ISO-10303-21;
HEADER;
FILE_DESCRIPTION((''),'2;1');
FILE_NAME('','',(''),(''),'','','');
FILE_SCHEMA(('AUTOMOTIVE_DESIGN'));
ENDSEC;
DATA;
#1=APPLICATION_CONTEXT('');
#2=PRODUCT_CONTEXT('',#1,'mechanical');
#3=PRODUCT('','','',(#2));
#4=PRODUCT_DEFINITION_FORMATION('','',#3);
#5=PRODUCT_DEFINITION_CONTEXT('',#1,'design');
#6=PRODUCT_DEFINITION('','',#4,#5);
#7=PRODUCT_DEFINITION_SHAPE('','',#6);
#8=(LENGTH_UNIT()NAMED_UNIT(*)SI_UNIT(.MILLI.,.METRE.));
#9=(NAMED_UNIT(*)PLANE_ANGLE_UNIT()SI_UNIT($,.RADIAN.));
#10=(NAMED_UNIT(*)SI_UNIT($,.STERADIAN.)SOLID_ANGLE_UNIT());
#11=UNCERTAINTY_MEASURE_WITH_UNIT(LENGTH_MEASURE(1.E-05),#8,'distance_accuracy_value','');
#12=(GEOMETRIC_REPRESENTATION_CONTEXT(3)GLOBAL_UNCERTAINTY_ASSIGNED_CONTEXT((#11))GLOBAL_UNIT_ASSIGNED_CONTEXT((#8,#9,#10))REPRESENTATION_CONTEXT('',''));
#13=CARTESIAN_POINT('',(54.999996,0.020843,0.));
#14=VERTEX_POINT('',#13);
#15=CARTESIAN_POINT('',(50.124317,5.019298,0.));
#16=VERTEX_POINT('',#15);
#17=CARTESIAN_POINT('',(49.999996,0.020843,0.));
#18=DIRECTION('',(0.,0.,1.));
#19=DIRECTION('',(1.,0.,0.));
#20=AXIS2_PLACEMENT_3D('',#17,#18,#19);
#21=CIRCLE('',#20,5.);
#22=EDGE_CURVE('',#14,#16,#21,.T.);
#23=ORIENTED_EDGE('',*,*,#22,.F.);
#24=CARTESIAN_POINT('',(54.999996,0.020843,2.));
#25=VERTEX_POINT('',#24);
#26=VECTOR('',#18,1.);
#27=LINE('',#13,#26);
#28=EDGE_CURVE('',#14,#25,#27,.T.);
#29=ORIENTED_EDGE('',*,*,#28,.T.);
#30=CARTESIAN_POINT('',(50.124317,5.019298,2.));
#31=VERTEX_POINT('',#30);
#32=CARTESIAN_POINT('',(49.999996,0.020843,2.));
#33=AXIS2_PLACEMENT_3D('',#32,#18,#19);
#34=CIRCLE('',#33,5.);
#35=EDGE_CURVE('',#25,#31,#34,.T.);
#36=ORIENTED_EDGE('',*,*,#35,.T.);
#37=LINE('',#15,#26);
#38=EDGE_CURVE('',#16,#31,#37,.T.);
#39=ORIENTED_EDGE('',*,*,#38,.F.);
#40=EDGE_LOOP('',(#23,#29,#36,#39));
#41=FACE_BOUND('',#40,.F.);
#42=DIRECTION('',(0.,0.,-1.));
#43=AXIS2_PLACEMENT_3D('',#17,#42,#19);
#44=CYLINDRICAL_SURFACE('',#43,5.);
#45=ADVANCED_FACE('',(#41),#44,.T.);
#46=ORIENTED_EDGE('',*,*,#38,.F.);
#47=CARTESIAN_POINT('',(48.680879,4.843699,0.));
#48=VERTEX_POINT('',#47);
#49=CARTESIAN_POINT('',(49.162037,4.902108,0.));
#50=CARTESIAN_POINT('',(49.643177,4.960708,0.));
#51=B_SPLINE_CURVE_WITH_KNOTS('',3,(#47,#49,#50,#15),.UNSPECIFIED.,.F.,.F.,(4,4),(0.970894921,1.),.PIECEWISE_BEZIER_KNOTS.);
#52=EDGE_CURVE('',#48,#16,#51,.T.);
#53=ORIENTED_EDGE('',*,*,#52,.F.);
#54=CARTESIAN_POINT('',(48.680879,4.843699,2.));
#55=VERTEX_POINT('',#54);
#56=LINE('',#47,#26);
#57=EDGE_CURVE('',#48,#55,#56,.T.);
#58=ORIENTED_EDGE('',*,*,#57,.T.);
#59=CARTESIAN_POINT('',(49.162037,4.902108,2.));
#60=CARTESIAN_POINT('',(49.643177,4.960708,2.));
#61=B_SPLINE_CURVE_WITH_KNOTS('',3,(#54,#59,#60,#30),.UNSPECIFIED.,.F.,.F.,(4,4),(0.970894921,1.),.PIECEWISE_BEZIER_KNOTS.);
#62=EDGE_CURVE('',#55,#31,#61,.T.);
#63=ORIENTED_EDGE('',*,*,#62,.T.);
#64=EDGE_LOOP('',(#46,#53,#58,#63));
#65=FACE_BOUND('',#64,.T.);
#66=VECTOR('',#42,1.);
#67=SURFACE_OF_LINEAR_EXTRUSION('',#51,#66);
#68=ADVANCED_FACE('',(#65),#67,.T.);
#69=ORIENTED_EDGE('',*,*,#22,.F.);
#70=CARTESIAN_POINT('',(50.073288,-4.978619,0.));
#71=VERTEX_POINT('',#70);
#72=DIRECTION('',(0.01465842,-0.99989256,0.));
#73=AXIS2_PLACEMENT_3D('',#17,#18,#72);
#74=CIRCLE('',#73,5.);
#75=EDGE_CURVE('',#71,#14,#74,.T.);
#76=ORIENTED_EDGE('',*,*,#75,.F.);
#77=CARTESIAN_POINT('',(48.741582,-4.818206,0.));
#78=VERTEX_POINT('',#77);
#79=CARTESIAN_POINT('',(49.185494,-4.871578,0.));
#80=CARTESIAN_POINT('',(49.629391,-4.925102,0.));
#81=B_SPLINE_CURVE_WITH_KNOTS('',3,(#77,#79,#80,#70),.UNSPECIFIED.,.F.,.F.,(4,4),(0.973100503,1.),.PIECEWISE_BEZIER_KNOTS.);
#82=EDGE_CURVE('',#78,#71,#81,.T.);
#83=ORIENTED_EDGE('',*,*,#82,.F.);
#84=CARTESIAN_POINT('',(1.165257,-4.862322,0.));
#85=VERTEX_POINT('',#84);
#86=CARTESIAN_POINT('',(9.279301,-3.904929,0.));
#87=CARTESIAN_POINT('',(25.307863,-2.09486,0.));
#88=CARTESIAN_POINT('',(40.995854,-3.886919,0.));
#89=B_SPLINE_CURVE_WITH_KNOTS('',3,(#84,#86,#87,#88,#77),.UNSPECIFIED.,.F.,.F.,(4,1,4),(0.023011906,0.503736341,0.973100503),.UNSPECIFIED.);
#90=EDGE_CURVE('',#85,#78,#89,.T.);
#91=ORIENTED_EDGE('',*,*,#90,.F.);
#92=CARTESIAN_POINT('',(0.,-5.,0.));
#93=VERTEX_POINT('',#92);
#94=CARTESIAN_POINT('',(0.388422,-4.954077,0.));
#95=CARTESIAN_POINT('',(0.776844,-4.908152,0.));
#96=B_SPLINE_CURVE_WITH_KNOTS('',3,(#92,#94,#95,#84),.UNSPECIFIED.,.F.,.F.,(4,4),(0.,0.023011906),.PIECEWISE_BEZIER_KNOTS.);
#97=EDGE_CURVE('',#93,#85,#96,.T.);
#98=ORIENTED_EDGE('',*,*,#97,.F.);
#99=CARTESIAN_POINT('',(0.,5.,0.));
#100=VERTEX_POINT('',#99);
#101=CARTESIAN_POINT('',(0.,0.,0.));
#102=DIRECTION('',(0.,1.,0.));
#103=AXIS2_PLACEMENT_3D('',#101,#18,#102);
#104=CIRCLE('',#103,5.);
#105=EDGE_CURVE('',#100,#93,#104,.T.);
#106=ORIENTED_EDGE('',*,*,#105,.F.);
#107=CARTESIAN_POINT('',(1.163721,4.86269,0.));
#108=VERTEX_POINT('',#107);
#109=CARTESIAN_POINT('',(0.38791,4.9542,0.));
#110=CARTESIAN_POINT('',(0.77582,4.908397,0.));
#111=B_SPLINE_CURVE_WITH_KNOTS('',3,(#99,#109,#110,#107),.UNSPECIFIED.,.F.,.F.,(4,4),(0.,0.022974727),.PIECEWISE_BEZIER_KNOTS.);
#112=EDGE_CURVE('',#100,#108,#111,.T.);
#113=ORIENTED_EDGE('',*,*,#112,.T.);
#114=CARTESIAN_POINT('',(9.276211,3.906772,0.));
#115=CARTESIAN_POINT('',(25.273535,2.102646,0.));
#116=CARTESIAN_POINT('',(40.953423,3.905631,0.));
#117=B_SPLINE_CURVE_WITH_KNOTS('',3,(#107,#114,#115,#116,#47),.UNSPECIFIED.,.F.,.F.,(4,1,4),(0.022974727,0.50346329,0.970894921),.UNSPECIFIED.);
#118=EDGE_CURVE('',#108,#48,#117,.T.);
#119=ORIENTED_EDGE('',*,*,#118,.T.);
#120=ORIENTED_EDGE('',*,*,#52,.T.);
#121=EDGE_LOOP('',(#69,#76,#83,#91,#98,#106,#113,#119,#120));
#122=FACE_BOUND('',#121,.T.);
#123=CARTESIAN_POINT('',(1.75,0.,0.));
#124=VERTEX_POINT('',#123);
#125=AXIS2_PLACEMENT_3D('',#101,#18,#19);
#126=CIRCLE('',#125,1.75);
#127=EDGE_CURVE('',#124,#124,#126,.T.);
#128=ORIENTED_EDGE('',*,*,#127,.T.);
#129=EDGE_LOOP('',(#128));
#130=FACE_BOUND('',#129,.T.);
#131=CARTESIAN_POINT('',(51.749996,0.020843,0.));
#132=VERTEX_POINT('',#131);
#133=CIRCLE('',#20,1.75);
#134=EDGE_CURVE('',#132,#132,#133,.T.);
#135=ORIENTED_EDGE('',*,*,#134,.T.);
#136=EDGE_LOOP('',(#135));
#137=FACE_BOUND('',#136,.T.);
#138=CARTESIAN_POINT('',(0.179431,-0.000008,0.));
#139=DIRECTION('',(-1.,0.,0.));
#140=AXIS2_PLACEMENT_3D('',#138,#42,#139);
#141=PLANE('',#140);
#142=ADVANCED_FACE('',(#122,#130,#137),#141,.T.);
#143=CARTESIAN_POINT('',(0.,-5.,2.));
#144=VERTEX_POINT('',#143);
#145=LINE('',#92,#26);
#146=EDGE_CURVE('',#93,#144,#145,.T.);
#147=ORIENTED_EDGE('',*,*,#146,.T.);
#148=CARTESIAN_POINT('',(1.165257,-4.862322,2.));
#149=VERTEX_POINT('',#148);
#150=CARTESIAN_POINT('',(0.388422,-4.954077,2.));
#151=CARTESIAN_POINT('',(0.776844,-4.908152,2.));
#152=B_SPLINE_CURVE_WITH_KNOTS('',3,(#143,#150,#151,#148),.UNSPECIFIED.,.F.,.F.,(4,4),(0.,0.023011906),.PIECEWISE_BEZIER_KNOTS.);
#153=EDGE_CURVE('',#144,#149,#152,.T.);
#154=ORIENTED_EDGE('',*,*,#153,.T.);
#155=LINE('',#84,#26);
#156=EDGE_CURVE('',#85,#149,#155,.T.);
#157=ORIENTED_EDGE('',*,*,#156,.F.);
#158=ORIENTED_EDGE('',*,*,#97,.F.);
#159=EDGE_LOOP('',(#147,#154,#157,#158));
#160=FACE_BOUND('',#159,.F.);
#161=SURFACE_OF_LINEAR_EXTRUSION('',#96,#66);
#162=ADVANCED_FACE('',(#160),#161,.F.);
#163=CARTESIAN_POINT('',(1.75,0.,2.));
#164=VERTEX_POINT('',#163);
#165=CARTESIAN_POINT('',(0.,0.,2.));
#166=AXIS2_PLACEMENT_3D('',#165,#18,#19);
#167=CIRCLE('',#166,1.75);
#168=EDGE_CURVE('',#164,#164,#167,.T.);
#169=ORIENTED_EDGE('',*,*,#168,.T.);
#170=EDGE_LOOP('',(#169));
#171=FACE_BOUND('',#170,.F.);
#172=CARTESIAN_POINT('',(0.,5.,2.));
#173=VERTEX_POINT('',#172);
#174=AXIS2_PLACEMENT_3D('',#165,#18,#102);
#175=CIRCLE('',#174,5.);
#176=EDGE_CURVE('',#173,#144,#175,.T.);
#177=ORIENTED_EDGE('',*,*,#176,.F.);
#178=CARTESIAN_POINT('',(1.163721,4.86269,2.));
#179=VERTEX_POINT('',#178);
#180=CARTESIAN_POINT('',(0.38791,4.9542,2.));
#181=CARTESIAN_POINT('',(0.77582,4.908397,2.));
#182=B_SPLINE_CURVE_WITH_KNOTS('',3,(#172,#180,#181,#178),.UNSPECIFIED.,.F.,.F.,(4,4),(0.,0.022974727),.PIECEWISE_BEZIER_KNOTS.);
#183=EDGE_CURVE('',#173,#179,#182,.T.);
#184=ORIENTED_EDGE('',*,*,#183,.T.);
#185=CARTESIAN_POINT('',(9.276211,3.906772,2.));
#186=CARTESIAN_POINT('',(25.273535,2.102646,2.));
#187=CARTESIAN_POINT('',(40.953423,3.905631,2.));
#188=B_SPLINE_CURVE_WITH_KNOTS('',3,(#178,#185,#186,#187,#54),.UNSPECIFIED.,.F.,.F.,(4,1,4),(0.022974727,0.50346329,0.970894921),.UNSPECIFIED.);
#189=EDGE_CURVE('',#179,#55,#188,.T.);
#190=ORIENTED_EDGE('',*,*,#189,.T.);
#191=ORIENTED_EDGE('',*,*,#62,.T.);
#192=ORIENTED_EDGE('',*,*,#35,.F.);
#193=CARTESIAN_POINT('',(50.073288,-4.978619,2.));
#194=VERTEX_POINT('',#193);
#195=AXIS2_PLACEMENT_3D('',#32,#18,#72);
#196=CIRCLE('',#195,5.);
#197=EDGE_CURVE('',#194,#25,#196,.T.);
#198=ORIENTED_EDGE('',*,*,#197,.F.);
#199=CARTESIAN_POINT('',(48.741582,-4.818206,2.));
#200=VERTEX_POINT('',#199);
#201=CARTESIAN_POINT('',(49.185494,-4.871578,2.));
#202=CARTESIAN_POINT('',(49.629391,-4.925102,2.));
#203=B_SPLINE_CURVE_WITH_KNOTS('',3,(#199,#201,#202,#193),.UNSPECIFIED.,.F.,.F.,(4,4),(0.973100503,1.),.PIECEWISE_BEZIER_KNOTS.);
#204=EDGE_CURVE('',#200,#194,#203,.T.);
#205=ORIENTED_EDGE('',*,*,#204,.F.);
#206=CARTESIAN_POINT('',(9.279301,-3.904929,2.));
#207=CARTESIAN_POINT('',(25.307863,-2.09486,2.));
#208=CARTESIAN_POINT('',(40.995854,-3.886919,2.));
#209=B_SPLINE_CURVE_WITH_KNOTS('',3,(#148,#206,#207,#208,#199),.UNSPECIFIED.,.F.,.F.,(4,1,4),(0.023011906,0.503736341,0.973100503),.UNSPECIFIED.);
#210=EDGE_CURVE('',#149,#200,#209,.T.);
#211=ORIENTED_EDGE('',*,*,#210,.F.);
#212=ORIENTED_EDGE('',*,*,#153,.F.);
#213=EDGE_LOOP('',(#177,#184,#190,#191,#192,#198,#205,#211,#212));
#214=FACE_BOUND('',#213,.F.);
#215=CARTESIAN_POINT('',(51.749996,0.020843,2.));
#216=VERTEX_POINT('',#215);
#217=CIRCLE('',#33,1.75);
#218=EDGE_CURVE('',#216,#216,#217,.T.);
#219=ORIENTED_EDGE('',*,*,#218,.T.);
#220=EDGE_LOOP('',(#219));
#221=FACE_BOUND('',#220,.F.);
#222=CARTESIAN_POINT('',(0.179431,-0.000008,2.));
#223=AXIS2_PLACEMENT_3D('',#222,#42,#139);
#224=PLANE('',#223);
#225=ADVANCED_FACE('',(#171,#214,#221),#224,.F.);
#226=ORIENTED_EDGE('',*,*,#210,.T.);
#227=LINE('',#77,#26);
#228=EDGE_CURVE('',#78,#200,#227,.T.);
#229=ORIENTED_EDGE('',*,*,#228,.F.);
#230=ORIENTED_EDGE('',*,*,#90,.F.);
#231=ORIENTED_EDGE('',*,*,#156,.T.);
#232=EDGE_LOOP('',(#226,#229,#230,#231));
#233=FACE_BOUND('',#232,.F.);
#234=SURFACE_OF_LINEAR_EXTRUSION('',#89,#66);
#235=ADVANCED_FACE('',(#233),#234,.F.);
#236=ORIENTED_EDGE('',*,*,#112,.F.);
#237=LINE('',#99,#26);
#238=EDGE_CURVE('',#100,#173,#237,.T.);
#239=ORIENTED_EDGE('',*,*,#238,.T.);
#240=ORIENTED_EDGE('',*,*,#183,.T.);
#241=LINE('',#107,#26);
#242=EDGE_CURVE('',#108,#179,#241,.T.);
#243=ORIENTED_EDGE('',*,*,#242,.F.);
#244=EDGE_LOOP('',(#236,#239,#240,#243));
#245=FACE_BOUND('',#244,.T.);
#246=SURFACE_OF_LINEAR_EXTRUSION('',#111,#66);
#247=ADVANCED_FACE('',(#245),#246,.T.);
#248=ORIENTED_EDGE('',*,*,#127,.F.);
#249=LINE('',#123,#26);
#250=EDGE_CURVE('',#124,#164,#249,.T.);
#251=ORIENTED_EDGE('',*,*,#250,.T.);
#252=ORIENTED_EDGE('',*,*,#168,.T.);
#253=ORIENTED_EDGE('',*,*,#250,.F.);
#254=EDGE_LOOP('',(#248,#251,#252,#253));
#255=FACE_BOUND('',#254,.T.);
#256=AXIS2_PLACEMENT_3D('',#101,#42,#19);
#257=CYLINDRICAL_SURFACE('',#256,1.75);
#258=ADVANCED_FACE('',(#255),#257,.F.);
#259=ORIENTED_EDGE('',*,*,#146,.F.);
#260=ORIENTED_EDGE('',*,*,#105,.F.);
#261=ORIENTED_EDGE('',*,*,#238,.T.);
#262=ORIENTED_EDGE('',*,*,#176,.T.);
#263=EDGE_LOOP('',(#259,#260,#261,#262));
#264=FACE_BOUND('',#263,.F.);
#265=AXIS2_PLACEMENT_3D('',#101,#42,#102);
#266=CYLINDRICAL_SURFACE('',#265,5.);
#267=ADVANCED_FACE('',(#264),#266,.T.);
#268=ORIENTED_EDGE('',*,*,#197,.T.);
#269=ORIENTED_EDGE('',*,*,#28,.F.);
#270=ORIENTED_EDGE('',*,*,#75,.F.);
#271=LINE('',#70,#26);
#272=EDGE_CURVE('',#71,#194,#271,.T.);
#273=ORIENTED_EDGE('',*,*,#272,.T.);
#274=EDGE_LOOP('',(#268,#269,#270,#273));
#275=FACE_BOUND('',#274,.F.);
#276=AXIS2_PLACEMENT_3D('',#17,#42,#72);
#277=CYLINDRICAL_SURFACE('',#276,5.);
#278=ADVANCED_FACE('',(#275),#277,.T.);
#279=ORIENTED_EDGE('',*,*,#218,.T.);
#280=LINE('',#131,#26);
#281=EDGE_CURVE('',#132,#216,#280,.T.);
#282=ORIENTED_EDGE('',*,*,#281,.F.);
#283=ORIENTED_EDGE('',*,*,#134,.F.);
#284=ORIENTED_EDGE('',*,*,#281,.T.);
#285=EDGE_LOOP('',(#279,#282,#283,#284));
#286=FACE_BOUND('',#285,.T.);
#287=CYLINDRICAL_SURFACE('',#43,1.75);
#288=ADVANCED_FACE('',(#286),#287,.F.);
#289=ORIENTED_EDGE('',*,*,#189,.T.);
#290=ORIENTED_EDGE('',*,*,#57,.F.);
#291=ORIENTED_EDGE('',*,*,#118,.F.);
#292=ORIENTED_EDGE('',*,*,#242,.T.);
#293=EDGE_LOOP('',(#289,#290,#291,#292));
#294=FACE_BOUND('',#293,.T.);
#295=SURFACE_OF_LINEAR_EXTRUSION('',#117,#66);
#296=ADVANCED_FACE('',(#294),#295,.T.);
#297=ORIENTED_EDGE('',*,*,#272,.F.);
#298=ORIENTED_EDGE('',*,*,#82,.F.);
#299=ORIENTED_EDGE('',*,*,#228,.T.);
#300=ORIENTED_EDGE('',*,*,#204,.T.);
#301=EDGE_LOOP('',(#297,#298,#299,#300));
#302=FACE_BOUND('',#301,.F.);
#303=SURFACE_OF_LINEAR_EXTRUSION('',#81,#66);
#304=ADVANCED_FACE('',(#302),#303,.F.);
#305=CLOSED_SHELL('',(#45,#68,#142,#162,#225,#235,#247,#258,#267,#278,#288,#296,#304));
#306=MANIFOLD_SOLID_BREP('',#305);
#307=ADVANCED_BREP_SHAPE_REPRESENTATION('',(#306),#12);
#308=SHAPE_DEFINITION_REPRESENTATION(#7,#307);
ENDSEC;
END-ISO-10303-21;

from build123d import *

# Parameters (mm, degrees)
F0_R     = 1.75
F1_DEPTH = 2


with BuildPart() as f1:
    # F0 (on Top) → F1 (new body)
    with BuildSketch(Plane.XY):
        with BuildLine():
            add(Edge.make_bspline(
                [(0, 5), (0.3879096976, 4.9541997763), (0.7758195621, 4.9083974868), (1.1637210766, 4.8626899198)],
                knots=[0, 0, 0, 0, 0.0229747267, 0.0229747267, 0.0229747267, 0.0229747267], degree=3))
            ThreePointArc((0, 5), (-5, 0), (0, -5))
            add(Edge.make_bspline(
                [(0, -5), (0.3884219151, -4.9540765878), (0.7768439434, -4.9081517555), (1.1652569528, -4.8623221031)],
                knots=[0, 0, 0, 0, 0.0230119064, 0.0230119064, 0.0230119064, 0.0230119064], degree=3))
            ThreePointArc((1.1652569528, -4.8623221031), (3.9259575115, -3.0962651078), (5, 0))
            ThreePointArc((5, 0), (3.9254684678, 3.0968850977), (1.1637210766, 4.8626899198))
        make_face()
        Circle(F0_R, mode=Mode.SUBTRACT)
        with BuildLine():
            add(Edge.make_bspline(
                [(1.1637210766, 4.8626899198), (9.2762111087, 3.9067715533), (25.2735349116, 2.1026460012), (40.9534234423, 3.9056306073), (48.6808792271, 4.8436985253)],
                knots=[0.0229747267, 0.0229747267, 0.0229747267, 0.0229747267, 0.5034632902, 0.9708949207, 0.9708949207, 0.9708949207, 0.9708949207], degree=3))
            ThreePointArc((1.1637210766, 4.8626899198), (3.9254684678, 3.0968850977), (5, 0))
            ThreePointArc((5, 0), (3.9259575115, -3.0962651078), (1.1652569528, -4.8623221031))
            add(Edge.make_bspline(
                [(1.1652569528, -4.8623221031), (9.2793010918, -3.9049292925), (25.3078629948, -2.0948602578), (40.9958544704, -3.8869187833), (48.7415823678, -4.8182057098)],
                knots=[0.0230119064, 0.0230119064, 0.0230119064, 0.0230119064, 0.5037363411, 0.9731005035, 0.9731005035, 0.9731005035, 0.9731005035], degree=3))
            ThreePointArc((48.7415823678, -4.8182057098), (45.0000943344, -0.0105696626), (48.6808792271, 4.8436985253))
        make_face()
        with BuildLine():
            add(Edge.make_bspline(
                [(48.6808792271, 4.8436985253), (49.1620366811, 4.9021082249), (49.6431766931, 4.9607078729), (50.1243168109, 5.0192975561)],
                knots=[0.9708949207, 0.9708949207, 0.9708949207, 0.9708949207, 1, 1, 1, 1], degree=3))
            ThreePointArc((48.6808792271, 4.8436985253), (45.0000943344, -0.0105696626), (48.7415823678, -4.8182057098))
            add(Edge.make_bspline(
                [(48.7415823678, -4.8182057098), (49.1854939332, -4.8715782324), (49.629390795, -4.9251017483), (50.0732877564, -4.9786194279)],
                knots=[0.9731005035, 0.9731005035, 0.9731005035, 0.9731005035, 1, 1, 1, 1], degree=3))
            ThreePointArc((50.0732877564, -4.9786194279), (53.5613479622, -3.488682203), (54.9999956555, 0.02084337))
            ThreePointArc((54.9999956555, 0.02084337), (53.5792138507, 3.5121464379), (50.1243168109, 5.0192975561))
        make_face()
        with Locations((49.9999956555, 0.02084337)):
            Circle(F0_R, mode=Mode.SUBTRACT)
    extrude(amount=F1_DEPTH)


solid = f1.part
